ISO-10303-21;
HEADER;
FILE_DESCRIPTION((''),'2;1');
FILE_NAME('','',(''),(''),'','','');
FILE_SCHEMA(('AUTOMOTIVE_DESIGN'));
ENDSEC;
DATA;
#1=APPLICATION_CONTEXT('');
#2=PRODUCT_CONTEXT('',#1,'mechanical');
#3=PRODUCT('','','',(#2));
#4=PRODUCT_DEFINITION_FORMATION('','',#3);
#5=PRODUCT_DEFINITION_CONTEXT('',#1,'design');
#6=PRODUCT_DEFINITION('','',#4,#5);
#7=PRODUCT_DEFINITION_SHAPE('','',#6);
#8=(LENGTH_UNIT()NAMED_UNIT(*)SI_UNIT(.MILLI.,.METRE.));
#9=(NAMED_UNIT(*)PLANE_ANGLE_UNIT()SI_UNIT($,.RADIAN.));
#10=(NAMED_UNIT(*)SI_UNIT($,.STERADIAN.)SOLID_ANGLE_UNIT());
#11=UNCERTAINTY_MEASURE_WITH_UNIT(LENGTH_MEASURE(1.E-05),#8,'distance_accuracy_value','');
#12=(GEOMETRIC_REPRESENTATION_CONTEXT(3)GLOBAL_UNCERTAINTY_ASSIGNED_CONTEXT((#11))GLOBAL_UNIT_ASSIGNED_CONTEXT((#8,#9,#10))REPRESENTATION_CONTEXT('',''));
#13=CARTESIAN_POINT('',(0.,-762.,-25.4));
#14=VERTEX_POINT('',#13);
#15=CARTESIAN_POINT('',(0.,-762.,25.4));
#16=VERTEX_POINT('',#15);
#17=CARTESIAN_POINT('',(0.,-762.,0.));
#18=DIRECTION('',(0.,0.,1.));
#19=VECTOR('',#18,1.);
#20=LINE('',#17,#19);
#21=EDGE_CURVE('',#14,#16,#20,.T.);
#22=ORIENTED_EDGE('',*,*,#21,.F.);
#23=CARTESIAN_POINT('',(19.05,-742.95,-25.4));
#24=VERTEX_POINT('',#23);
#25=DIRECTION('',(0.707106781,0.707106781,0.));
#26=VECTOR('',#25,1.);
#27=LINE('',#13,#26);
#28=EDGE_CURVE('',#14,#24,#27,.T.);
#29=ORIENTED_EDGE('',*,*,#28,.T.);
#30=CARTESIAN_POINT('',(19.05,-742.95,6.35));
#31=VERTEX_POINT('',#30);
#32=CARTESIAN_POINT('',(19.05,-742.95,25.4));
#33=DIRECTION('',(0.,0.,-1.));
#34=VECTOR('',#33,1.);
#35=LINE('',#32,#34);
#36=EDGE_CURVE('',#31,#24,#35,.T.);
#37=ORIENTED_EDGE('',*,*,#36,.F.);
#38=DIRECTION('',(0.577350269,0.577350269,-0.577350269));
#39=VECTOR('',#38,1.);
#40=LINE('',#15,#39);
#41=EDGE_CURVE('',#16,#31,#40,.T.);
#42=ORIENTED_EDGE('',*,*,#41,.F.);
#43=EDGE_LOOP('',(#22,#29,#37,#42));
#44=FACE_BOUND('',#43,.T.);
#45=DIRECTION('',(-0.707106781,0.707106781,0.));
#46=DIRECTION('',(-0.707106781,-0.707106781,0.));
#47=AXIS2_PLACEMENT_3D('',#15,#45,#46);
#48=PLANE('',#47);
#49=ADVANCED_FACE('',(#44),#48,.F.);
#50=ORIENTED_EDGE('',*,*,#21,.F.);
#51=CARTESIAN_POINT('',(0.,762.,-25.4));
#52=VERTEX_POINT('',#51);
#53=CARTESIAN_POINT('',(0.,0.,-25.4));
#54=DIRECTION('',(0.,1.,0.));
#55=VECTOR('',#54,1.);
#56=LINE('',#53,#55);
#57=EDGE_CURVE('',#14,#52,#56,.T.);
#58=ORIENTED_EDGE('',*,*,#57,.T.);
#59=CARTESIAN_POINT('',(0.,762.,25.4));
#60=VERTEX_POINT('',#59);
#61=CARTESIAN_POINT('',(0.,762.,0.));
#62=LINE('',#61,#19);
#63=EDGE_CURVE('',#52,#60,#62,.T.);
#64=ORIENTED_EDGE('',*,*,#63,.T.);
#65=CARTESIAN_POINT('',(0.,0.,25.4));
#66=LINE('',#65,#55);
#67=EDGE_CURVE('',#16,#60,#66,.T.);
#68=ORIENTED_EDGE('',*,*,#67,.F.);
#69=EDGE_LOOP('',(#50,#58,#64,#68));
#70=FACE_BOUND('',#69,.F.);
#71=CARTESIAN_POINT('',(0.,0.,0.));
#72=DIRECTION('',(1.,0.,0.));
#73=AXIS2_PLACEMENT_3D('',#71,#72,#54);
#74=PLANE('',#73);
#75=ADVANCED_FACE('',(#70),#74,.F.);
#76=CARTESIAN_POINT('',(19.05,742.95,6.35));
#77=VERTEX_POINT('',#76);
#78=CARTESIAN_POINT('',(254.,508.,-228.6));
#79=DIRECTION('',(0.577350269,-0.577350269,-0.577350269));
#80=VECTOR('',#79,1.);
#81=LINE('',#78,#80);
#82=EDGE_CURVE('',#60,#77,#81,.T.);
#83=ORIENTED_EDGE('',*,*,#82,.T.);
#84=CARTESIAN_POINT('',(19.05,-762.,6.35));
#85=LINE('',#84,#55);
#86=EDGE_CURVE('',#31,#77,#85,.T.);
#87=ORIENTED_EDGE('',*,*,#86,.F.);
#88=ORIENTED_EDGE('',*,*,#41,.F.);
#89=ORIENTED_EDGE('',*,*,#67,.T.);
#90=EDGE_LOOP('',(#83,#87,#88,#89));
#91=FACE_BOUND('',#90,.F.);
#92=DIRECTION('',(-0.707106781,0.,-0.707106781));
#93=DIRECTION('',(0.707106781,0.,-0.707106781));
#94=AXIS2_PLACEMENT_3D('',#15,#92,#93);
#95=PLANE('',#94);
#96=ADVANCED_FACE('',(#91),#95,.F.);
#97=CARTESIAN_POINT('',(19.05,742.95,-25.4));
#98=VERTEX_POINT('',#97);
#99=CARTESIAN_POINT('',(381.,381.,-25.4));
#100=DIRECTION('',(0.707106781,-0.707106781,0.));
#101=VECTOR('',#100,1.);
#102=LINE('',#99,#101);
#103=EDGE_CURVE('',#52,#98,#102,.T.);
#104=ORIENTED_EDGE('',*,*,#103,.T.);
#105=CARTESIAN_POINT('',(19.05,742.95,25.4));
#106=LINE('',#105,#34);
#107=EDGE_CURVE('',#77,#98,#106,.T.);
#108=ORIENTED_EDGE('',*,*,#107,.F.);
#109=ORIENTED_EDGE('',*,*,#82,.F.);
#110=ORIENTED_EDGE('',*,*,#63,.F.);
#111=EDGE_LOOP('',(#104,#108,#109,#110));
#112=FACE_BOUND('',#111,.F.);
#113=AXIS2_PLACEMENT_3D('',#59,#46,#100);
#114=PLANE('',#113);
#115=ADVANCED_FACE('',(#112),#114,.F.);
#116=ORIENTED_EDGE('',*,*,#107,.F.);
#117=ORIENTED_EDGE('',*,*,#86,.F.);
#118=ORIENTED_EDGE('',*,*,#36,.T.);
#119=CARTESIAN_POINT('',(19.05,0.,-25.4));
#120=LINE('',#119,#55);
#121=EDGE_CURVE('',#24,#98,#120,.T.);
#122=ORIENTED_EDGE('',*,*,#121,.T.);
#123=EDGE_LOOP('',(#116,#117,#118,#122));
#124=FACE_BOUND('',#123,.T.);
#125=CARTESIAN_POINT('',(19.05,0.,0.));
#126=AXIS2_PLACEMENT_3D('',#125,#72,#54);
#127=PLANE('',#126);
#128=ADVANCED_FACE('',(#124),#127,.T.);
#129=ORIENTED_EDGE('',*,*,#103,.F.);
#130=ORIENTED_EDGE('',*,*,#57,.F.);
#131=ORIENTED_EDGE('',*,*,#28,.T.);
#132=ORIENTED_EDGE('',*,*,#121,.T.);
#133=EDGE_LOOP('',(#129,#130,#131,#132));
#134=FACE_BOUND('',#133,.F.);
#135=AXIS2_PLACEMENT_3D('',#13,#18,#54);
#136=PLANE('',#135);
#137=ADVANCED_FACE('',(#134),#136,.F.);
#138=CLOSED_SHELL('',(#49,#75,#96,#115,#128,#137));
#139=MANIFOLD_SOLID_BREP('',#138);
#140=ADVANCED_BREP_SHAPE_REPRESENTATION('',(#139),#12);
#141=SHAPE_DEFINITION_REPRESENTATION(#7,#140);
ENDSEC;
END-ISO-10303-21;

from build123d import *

# Parameters (mm, degrees)
F0_W     = 1524
F0_H     = 50.8
F1_DEPTH = 19.05
F3_DEPTH = 50.801
F5_DEPTH = 1524.001


# Not quite as in the source:
# - a pattern or mirror of a feature is missing from the dataset's text; its kind, count and spacing are read off the source's solid


with BuildPart() as f1:
    # F0 (on Right) → F1 (new body)
    with BuildSketch(Plane.YZ):
        Rectangle(F0_W, F0_H)
    extrude(amount=F1_DEPTH)

    # F2 (on face) → F3 (cut, through all)
    with BuildSketch(Plane.XY.offset(25.4)):
        Polygon((19.05, 762), (0, 762), (19.05, 742.95), align=None)
    f3 = extrude(amount=-F3_DEPTH, mode=Mode.SUBTRACT)

    # F3_copies: F3 across plane
    add(f3.mirror(Plane(origin=(0, 0, 0), x_dir=(0, 0, -1), z_dir=(0, -1, 0))), mode=Mode.SUBTRACT)

    # F4 (on face) → F5 (cut, through all)
    with BuildSketch(Plane.XZ.offset(762)):
        Polygon((19.05, 25.4), (0, 25.4), (19.05, 6.35), align=None)
    extrude(amount=-F5_DEPTH, mode=Mode.SUBTRACT)


solid = f1.part
